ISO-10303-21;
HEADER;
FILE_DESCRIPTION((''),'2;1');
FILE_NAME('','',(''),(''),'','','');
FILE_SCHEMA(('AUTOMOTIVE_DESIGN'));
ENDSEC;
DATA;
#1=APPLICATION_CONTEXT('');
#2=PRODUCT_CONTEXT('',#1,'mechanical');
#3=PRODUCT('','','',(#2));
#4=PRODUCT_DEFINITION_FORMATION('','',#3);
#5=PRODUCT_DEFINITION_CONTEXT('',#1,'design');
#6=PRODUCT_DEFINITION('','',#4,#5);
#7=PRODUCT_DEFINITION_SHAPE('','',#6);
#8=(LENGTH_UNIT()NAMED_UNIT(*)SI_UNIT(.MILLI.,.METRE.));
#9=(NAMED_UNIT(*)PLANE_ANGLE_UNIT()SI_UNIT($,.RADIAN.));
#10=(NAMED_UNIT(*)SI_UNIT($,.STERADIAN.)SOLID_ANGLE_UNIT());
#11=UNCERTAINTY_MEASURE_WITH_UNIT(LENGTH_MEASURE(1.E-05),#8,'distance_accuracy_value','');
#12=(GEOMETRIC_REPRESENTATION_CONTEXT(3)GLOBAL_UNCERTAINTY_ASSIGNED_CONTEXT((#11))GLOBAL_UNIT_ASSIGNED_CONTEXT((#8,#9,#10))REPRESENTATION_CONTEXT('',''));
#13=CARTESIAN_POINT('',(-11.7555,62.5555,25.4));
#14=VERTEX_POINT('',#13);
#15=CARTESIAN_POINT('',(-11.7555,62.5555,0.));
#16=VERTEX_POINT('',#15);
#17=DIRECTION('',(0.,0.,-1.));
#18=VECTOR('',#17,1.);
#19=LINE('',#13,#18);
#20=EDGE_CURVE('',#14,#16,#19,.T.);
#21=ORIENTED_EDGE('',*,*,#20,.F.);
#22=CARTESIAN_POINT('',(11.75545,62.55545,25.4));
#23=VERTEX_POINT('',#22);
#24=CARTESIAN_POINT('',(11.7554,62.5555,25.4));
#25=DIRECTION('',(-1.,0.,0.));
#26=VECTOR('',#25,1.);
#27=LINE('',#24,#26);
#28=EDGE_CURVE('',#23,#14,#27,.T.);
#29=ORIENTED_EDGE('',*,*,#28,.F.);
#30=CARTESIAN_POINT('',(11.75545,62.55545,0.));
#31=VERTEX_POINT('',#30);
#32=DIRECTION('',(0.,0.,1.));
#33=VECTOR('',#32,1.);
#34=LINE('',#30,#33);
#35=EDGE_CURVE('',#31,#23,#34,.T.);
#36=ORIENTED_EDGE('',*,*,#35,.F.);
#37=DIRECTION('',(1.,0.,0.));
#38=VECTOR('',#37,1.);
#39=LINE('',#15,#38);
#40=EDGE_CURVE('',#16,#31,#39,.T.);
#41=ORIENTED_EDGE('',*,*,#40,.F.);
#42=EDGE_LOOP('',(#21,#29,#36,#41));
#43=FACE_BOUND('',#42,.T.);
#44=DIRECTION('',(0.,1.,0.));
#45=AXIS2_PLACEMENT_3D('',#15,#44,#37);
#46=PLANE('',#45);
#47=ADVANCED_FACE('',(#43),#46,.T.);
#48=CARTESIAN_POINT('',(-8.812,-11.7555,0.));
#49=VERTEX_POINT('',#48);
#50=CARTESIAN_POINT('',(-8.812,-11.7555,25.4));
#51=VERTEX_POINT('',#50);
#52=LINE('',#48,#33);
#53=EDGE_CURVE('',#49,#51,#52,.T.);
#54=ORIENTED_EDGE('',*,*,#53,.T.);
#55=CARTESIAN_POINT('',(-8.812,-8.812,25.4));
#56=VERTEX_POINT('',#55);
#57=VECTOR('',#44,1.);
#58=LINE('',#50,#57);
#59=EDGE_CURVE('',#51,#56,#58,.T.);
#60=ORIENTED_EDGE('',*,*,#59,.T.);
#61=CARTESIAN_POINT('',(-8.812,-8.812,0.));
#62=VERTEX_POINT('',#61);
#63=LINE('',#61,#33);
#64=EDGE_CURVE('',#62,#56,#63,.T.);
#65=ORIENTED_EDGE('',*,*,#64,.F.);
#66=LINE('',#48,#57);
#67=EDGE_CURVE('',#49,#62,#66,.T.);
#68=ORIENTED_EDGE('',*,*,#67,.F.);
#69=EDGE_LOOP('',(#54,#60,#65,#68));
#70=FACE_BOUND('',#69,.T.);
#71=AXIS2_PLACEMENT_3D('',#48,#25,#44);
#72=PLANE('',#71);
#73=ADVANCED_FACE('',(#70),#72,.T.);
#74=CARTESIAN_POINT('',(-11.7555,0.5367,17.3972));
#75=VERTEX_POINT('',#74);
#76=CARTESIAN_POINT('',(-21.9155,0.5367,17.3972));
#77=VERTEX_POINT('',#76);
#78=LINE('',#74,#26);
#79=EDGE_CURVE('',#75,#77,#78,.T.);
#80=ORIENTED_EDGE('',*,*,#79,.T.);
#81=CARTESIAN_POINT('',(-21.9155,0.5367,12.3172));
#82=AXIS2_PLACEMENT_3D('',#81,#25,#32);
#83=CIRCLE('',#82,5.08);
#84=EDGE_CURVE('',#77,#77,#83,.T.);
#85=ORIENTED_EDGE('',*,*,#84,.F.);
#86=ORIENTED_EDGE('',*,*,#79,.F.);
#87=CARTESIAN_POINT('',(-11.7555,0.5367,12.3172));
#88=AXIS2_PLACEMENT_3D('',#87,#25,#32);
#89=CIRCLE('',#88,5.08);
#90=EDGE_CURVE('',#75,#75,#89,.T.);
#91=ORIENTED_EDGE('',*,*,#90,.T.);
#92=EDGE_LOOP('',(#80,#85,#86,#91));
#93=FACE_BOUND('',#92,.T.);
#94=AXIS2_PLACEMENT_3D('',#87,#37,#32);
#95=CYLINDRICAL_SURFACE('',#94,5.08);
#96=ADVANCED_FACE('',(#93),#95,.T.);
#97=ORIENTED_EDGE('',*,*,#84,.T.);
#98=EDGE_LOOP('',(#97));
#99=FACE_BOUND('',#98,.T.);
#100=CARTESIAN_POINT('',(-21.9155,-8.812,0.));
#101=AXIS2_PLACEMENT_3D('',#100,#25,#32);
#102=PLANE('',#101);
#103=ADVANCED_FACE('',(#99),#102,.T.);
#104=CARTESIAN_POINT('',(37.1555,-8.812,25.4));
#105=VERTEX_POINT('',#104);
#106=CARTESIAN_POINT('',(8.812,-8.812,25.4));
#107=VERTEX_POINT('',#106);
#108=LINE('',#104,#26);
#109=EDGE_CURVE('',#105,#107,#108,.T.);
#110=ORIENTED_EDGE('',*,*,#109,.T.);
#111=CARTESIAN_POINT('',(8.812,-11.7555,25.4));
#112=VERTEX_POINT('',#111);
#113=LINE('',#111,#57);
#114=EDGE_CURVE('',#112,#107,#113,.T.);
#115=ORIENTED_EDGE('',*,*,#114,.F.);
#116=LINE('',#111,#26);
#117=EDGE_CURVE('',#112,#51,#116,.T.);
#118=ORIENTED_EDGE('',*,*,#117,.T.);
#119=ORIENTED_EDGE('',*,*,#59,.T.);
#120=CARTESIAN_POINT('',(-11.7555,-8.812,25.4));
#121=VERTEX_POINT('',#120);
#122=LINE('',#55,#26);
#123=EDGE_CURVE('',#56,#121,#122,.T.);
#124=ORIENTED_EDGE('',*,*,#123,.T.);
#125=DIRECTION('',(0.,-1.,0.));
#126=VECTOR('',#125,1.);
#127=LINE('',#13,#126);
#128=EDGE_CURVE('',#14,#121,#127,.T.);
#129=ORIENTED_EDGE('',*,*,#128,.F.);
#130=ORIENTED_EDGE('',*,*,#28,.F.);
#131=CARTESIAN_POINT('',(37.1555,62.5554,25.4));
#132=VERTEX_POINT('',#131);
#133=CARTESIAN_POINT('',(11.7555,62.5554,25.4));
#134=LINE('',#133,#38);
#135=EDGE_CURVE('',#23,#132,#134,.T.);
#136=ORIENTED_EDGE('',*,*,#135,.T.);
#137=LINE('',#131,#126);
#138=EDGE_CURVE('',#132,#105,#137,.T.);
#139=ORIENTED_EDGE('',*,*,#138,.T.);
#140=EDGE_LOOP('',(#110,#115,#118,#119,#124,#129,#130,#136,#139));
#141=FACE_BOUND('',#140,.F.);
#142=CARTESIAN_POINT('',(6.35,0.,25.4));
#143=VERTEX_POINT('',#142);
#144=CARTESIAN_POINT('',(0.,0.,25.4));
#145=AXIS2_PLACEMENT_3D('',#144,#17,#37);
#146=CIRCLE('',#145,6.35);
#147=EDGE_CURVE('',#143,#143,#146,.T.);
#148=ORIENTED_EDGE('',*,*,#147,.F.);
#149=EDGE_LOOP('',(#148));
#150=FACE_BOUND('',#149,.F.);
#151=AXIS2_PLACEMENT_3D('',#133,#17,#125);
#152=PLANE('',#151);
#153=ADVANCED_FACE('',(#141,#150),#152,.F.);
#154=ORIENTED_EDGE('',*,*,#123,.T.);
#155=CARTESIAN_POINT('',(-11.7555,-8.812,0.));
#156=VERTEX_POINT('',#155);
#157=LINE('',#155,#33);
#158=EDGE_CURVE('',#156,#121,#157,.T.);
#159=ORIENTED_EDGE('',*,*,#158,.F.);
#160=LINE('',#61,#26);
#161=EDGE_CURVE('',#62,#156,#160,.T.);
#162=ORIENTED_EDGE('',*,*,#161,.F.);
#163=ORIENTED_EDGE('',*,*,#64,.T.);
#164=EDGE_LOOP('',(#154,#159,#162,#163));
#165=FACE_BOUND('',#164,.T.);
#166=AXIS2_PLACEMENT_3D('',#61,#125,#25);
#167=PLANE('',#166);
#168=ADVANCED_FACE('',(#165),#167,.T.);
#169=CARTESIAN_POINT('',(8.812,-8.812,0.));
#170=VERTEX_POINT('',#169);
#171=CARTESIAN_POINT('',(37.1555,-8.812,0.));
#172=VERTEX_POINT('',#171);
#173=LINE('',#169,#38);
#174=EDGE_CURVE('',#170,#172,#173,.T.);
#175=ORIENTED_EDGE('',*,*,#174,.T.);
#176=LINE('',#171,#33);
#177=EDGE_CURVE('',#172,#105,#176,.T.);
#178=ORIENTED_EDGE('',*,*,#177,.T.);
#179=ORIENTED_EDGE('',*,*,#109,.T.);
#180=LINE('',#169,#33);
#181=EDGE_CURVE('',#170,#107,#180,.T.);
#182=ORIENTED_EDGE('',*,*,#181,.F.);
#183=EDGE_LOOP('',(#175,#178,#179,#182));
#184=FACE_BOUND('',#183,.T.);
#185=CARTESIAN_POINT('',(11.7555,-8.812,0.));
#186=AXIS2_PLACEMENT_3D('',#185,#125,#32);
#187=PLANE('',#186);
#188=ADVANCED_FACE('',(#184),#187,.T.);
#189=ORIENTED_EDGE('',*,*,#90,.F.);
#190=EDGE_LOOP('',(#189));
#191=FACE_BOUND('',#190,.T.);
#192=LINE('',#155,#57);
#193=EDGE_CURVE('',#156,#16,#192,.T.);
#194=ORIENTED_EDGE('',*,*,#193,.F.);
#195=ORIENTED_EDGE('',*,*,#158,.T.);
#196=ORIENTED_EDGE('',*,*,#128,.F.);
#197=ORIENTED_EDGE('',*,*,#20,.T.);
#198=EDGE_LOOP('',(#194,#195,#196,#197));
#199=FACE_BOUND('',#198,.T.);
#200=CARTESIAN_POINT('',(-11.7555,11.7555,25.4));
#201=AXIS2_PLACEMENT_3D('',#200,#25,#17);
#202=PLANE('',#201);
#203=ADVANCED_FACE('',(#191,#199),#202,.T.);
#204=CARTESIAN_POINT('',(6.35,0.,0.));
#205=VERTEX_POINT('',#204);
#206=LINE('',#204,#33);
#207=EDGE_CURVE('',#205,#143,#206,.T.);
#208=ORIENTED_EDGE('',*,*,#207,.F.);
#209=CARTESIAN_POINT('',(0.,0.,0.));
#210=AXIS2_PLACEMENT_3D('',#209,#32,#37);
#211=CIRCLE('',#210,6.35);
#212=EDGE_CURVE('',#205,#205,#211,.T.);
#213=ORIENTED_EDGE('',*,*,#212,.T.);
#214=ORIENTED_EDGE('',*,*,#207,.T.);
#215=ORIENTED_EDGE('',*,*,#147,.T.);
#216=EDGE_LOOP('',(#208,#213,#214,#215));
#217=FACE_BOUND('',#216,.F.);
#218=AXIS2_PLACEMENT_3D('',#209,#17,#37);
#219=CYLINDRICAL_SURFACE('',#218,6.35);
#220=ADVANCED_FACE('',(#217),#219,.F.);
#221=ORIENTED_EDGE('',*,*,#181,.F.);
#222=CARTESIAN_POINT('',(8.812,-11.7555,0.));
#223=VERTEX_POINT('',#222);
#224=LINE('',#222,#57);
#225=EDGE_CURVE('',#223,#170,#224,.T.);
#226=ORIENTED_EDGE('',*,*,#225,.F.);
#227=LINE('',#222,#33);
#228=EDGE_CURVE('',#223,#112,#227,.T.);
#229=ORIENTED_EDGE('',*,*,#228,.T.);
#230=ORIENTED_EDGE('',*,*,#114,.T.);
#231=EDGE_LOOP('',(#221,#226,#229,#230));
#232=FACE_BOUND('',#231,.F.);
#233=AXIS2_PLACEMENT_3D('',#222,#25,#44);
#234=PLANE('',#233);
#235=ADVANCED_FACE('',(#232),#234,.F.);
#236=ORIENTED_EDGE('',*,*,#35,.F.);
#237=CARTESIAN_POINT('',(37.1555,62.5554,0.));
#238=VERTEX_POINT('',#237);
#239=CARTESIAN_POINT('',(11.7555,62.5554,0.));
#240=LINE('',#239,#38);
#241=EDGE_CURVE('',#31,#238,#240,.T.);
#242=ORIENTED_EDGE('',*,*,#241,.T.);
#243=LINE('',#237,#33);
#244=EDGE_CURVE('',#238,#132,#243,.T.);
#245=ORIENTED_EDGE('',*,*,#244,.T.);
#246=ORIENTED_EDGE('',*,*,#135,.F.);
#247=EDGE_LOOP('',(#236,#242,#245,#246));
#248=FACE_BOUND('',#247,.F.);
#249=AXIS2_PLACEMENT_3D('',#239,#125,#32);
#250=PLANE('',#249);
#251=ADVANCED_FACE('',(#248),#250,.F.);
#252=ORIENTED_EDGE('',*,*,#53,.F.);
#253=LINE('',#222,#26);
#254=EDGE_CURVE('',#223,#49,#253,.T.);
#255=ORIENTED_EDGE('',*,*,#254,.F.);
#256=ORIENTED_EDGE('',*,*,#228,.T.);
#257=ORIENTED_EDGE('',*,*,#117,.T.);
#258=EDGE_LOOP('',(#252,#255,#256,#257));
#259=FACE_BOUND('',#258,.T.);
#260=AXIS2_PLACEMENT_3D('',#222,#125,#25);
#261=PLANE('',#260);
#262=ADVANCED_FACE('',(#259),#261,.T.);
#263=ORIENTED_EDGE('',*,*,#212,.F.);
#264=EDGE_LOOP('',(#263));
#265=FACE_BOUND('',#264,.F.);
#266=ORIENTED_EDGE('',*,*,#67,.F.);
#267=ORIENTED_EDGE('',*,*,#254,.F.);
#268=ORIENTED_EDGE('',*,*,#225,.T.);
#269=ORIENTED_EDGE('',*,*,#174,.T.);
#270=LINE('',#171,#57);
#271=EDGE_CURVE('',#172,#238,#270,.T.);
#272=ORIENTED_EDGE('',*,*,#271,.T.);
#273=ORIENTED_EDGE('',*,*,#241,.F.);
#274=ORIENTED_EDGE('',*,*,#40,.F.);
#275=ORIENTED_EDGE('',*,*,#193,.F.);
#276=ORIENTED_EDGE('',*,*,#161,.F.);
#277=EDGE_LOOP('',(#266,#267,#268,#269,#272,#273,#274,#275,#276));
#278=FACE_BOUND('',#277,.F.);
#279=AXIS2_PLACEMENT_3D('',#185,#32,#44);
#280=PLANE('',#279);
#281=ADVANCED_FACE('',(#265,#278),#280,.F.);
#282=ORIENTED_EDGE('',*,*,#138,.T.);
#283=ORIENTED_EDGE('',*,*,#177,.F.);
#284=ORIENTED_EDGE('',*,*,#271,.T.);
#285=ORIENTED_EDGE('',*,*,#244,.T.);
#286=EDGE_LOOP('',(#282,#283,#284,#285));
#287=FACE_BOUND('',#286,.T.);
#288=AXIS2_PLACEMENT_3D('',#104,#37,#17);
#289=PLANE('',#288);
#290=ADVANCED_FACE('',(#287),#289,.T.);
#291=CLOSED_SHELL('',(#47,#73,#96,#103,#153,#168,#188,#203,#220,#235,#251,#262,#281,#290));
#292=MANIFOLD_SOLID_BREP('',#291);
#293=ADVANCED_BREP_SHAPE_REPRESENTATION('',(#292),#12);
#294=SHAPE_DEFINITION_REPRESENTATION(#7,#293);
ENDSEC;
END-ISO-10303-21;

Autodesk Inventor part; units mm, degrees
ref_plane "YZ Plane" through (0, 0, 0) normal (1, 0, 0) x (0, 1, 0)
ref_plane "XZ Plane" through (0, 0, 0) normal (0, 1, 0) x (-1, 0, 0)
ref_plane "XY Plane" through (0, 0, 0) normal (0, 0, 1) x (1, 0, 0)
sketch "Sketch1" plane through (0, 0, 0) normal (0, 0, 1) x (1, 0, 0)
  line L0 (-11.7555, 11.7555) -> (11.7555, 11.7555)
  line L1 (11.7555, 11.7555) -> (11.7555, -8.812)
  line L2 (8.812, -11.7555) -> (-8.812, -11.7555)
  line L3 (-11.7555, -8.812) -> (-11.7555, 11.7555)
  line L4 (-11.7555, 11.7555) -> (11.7555, -11.7555) construction
  line L5 (11.7555, 11.7555) -> (-11.7555, -11.7555) construction
  line L6 (11.7555, -11.7555) -> (8.812, -11.7555)
  line L7 (8.812, -11.7555) -> (8.812, -8.812)
  line L8 (8.812, -8.812) -> (11.7555, -8.812)
  line L9 (11.7555, -8.812) -> (11.7555, -11.7555)
  line L10 (-8.812, -11.7555) -> (-8.812, -8.812)
  line L11 (-8.812, -8.812) -> (-11.7555, -8.812)
  circle A0 centre (0, 0) radius 6.35
  point P0 (0, 0)
  dimension "d4" = 12.7
extrude "Extrusion1" add sketch "Sketch1" along normal blind 25.4 contours L0 L1 L8 L7 L2 L10 L11 L3
mirror "Mirror1" about plane through (0, 0, 0) normal (1, 0, 0)
sketch "Sketch3" plane through (-11.7555, -8.812, 0) normal (-1, 0, 0) x (0, 0, 1)
  circle A0 centre (12.3172, 9.3487) radius 5.08
  point P0 (0, 8.812)
  dimension "d13" = 10.16
extrude "Extrusion3" add sketch "Sketch3" along normal blind 10.16
sketch "Sketch4" plane through (-11.7555, 11.7555, 0) normal (0, 1, 0) x (1, 0, 0)
  line L0 (23.5109, 0) -> (23.5109, -25.4) projected
  line L1 (0, 0) -> (2.9435, 0) projected
  line L2 (23.5109, -25.4) -> (0, -25.4)
  line L3 (0, -25.4) -> (0, 0)
  line L4 (0, 0) -> (23.5109, 0)
  line L5 (23.5109, 0) -> (23.5109, -25.4)
  point P0 (11.7555, 0)
  point P1 (2.9435, 0)
extrude "Extrusion4" add sketch "Sketch4" along normal blind 50.8
sketch "Sketch5" plane through (11.7555, -8.812, 25.4) normal (1, 0, 0) x (0, 0, -1)
  line L0 (25.4, 0) -> (0, 0) projected
  line L1 (25.4, 0) -> (25.4, 71.3674) projected
  line L2 (0, 0) -> (25.4, 0)
  line L3 (25.4, 0) -> (25.4, 71.3674)
  line L4 (25.4, 71.3674) -> (0, 71.3674)
  line L5 (0, 71.3674) -> (0, 0)
  point P0 (25.4, 8.812)
extrude "Extrusion5" add sketch "Sketch5" along normal blind 25.4
ref_plane "Work Plane1" through (0, 0, 0) normal (1, 0, 0) x (0, 1, 0)
equation "\"BendRadius\" = Thickness"
equation "\"BendReliefWidth\" = Thickness"
equation "\"BendReliefDepth\" = 0.5 * Thickness"
equation "\"CornerReliefSize\" = 4 * Thickness"
equation "\"MinimumRemnant\" = 2 * Thickness"
equation "\"TransitionRadius\" = BendRadius"
equation "\"JacobiRadiusSize\" = BendRadius"
equation "\"GapSize\" = Thickness"
equation "\"Thickness\" = 3.048"
properties part number "new slider part"
